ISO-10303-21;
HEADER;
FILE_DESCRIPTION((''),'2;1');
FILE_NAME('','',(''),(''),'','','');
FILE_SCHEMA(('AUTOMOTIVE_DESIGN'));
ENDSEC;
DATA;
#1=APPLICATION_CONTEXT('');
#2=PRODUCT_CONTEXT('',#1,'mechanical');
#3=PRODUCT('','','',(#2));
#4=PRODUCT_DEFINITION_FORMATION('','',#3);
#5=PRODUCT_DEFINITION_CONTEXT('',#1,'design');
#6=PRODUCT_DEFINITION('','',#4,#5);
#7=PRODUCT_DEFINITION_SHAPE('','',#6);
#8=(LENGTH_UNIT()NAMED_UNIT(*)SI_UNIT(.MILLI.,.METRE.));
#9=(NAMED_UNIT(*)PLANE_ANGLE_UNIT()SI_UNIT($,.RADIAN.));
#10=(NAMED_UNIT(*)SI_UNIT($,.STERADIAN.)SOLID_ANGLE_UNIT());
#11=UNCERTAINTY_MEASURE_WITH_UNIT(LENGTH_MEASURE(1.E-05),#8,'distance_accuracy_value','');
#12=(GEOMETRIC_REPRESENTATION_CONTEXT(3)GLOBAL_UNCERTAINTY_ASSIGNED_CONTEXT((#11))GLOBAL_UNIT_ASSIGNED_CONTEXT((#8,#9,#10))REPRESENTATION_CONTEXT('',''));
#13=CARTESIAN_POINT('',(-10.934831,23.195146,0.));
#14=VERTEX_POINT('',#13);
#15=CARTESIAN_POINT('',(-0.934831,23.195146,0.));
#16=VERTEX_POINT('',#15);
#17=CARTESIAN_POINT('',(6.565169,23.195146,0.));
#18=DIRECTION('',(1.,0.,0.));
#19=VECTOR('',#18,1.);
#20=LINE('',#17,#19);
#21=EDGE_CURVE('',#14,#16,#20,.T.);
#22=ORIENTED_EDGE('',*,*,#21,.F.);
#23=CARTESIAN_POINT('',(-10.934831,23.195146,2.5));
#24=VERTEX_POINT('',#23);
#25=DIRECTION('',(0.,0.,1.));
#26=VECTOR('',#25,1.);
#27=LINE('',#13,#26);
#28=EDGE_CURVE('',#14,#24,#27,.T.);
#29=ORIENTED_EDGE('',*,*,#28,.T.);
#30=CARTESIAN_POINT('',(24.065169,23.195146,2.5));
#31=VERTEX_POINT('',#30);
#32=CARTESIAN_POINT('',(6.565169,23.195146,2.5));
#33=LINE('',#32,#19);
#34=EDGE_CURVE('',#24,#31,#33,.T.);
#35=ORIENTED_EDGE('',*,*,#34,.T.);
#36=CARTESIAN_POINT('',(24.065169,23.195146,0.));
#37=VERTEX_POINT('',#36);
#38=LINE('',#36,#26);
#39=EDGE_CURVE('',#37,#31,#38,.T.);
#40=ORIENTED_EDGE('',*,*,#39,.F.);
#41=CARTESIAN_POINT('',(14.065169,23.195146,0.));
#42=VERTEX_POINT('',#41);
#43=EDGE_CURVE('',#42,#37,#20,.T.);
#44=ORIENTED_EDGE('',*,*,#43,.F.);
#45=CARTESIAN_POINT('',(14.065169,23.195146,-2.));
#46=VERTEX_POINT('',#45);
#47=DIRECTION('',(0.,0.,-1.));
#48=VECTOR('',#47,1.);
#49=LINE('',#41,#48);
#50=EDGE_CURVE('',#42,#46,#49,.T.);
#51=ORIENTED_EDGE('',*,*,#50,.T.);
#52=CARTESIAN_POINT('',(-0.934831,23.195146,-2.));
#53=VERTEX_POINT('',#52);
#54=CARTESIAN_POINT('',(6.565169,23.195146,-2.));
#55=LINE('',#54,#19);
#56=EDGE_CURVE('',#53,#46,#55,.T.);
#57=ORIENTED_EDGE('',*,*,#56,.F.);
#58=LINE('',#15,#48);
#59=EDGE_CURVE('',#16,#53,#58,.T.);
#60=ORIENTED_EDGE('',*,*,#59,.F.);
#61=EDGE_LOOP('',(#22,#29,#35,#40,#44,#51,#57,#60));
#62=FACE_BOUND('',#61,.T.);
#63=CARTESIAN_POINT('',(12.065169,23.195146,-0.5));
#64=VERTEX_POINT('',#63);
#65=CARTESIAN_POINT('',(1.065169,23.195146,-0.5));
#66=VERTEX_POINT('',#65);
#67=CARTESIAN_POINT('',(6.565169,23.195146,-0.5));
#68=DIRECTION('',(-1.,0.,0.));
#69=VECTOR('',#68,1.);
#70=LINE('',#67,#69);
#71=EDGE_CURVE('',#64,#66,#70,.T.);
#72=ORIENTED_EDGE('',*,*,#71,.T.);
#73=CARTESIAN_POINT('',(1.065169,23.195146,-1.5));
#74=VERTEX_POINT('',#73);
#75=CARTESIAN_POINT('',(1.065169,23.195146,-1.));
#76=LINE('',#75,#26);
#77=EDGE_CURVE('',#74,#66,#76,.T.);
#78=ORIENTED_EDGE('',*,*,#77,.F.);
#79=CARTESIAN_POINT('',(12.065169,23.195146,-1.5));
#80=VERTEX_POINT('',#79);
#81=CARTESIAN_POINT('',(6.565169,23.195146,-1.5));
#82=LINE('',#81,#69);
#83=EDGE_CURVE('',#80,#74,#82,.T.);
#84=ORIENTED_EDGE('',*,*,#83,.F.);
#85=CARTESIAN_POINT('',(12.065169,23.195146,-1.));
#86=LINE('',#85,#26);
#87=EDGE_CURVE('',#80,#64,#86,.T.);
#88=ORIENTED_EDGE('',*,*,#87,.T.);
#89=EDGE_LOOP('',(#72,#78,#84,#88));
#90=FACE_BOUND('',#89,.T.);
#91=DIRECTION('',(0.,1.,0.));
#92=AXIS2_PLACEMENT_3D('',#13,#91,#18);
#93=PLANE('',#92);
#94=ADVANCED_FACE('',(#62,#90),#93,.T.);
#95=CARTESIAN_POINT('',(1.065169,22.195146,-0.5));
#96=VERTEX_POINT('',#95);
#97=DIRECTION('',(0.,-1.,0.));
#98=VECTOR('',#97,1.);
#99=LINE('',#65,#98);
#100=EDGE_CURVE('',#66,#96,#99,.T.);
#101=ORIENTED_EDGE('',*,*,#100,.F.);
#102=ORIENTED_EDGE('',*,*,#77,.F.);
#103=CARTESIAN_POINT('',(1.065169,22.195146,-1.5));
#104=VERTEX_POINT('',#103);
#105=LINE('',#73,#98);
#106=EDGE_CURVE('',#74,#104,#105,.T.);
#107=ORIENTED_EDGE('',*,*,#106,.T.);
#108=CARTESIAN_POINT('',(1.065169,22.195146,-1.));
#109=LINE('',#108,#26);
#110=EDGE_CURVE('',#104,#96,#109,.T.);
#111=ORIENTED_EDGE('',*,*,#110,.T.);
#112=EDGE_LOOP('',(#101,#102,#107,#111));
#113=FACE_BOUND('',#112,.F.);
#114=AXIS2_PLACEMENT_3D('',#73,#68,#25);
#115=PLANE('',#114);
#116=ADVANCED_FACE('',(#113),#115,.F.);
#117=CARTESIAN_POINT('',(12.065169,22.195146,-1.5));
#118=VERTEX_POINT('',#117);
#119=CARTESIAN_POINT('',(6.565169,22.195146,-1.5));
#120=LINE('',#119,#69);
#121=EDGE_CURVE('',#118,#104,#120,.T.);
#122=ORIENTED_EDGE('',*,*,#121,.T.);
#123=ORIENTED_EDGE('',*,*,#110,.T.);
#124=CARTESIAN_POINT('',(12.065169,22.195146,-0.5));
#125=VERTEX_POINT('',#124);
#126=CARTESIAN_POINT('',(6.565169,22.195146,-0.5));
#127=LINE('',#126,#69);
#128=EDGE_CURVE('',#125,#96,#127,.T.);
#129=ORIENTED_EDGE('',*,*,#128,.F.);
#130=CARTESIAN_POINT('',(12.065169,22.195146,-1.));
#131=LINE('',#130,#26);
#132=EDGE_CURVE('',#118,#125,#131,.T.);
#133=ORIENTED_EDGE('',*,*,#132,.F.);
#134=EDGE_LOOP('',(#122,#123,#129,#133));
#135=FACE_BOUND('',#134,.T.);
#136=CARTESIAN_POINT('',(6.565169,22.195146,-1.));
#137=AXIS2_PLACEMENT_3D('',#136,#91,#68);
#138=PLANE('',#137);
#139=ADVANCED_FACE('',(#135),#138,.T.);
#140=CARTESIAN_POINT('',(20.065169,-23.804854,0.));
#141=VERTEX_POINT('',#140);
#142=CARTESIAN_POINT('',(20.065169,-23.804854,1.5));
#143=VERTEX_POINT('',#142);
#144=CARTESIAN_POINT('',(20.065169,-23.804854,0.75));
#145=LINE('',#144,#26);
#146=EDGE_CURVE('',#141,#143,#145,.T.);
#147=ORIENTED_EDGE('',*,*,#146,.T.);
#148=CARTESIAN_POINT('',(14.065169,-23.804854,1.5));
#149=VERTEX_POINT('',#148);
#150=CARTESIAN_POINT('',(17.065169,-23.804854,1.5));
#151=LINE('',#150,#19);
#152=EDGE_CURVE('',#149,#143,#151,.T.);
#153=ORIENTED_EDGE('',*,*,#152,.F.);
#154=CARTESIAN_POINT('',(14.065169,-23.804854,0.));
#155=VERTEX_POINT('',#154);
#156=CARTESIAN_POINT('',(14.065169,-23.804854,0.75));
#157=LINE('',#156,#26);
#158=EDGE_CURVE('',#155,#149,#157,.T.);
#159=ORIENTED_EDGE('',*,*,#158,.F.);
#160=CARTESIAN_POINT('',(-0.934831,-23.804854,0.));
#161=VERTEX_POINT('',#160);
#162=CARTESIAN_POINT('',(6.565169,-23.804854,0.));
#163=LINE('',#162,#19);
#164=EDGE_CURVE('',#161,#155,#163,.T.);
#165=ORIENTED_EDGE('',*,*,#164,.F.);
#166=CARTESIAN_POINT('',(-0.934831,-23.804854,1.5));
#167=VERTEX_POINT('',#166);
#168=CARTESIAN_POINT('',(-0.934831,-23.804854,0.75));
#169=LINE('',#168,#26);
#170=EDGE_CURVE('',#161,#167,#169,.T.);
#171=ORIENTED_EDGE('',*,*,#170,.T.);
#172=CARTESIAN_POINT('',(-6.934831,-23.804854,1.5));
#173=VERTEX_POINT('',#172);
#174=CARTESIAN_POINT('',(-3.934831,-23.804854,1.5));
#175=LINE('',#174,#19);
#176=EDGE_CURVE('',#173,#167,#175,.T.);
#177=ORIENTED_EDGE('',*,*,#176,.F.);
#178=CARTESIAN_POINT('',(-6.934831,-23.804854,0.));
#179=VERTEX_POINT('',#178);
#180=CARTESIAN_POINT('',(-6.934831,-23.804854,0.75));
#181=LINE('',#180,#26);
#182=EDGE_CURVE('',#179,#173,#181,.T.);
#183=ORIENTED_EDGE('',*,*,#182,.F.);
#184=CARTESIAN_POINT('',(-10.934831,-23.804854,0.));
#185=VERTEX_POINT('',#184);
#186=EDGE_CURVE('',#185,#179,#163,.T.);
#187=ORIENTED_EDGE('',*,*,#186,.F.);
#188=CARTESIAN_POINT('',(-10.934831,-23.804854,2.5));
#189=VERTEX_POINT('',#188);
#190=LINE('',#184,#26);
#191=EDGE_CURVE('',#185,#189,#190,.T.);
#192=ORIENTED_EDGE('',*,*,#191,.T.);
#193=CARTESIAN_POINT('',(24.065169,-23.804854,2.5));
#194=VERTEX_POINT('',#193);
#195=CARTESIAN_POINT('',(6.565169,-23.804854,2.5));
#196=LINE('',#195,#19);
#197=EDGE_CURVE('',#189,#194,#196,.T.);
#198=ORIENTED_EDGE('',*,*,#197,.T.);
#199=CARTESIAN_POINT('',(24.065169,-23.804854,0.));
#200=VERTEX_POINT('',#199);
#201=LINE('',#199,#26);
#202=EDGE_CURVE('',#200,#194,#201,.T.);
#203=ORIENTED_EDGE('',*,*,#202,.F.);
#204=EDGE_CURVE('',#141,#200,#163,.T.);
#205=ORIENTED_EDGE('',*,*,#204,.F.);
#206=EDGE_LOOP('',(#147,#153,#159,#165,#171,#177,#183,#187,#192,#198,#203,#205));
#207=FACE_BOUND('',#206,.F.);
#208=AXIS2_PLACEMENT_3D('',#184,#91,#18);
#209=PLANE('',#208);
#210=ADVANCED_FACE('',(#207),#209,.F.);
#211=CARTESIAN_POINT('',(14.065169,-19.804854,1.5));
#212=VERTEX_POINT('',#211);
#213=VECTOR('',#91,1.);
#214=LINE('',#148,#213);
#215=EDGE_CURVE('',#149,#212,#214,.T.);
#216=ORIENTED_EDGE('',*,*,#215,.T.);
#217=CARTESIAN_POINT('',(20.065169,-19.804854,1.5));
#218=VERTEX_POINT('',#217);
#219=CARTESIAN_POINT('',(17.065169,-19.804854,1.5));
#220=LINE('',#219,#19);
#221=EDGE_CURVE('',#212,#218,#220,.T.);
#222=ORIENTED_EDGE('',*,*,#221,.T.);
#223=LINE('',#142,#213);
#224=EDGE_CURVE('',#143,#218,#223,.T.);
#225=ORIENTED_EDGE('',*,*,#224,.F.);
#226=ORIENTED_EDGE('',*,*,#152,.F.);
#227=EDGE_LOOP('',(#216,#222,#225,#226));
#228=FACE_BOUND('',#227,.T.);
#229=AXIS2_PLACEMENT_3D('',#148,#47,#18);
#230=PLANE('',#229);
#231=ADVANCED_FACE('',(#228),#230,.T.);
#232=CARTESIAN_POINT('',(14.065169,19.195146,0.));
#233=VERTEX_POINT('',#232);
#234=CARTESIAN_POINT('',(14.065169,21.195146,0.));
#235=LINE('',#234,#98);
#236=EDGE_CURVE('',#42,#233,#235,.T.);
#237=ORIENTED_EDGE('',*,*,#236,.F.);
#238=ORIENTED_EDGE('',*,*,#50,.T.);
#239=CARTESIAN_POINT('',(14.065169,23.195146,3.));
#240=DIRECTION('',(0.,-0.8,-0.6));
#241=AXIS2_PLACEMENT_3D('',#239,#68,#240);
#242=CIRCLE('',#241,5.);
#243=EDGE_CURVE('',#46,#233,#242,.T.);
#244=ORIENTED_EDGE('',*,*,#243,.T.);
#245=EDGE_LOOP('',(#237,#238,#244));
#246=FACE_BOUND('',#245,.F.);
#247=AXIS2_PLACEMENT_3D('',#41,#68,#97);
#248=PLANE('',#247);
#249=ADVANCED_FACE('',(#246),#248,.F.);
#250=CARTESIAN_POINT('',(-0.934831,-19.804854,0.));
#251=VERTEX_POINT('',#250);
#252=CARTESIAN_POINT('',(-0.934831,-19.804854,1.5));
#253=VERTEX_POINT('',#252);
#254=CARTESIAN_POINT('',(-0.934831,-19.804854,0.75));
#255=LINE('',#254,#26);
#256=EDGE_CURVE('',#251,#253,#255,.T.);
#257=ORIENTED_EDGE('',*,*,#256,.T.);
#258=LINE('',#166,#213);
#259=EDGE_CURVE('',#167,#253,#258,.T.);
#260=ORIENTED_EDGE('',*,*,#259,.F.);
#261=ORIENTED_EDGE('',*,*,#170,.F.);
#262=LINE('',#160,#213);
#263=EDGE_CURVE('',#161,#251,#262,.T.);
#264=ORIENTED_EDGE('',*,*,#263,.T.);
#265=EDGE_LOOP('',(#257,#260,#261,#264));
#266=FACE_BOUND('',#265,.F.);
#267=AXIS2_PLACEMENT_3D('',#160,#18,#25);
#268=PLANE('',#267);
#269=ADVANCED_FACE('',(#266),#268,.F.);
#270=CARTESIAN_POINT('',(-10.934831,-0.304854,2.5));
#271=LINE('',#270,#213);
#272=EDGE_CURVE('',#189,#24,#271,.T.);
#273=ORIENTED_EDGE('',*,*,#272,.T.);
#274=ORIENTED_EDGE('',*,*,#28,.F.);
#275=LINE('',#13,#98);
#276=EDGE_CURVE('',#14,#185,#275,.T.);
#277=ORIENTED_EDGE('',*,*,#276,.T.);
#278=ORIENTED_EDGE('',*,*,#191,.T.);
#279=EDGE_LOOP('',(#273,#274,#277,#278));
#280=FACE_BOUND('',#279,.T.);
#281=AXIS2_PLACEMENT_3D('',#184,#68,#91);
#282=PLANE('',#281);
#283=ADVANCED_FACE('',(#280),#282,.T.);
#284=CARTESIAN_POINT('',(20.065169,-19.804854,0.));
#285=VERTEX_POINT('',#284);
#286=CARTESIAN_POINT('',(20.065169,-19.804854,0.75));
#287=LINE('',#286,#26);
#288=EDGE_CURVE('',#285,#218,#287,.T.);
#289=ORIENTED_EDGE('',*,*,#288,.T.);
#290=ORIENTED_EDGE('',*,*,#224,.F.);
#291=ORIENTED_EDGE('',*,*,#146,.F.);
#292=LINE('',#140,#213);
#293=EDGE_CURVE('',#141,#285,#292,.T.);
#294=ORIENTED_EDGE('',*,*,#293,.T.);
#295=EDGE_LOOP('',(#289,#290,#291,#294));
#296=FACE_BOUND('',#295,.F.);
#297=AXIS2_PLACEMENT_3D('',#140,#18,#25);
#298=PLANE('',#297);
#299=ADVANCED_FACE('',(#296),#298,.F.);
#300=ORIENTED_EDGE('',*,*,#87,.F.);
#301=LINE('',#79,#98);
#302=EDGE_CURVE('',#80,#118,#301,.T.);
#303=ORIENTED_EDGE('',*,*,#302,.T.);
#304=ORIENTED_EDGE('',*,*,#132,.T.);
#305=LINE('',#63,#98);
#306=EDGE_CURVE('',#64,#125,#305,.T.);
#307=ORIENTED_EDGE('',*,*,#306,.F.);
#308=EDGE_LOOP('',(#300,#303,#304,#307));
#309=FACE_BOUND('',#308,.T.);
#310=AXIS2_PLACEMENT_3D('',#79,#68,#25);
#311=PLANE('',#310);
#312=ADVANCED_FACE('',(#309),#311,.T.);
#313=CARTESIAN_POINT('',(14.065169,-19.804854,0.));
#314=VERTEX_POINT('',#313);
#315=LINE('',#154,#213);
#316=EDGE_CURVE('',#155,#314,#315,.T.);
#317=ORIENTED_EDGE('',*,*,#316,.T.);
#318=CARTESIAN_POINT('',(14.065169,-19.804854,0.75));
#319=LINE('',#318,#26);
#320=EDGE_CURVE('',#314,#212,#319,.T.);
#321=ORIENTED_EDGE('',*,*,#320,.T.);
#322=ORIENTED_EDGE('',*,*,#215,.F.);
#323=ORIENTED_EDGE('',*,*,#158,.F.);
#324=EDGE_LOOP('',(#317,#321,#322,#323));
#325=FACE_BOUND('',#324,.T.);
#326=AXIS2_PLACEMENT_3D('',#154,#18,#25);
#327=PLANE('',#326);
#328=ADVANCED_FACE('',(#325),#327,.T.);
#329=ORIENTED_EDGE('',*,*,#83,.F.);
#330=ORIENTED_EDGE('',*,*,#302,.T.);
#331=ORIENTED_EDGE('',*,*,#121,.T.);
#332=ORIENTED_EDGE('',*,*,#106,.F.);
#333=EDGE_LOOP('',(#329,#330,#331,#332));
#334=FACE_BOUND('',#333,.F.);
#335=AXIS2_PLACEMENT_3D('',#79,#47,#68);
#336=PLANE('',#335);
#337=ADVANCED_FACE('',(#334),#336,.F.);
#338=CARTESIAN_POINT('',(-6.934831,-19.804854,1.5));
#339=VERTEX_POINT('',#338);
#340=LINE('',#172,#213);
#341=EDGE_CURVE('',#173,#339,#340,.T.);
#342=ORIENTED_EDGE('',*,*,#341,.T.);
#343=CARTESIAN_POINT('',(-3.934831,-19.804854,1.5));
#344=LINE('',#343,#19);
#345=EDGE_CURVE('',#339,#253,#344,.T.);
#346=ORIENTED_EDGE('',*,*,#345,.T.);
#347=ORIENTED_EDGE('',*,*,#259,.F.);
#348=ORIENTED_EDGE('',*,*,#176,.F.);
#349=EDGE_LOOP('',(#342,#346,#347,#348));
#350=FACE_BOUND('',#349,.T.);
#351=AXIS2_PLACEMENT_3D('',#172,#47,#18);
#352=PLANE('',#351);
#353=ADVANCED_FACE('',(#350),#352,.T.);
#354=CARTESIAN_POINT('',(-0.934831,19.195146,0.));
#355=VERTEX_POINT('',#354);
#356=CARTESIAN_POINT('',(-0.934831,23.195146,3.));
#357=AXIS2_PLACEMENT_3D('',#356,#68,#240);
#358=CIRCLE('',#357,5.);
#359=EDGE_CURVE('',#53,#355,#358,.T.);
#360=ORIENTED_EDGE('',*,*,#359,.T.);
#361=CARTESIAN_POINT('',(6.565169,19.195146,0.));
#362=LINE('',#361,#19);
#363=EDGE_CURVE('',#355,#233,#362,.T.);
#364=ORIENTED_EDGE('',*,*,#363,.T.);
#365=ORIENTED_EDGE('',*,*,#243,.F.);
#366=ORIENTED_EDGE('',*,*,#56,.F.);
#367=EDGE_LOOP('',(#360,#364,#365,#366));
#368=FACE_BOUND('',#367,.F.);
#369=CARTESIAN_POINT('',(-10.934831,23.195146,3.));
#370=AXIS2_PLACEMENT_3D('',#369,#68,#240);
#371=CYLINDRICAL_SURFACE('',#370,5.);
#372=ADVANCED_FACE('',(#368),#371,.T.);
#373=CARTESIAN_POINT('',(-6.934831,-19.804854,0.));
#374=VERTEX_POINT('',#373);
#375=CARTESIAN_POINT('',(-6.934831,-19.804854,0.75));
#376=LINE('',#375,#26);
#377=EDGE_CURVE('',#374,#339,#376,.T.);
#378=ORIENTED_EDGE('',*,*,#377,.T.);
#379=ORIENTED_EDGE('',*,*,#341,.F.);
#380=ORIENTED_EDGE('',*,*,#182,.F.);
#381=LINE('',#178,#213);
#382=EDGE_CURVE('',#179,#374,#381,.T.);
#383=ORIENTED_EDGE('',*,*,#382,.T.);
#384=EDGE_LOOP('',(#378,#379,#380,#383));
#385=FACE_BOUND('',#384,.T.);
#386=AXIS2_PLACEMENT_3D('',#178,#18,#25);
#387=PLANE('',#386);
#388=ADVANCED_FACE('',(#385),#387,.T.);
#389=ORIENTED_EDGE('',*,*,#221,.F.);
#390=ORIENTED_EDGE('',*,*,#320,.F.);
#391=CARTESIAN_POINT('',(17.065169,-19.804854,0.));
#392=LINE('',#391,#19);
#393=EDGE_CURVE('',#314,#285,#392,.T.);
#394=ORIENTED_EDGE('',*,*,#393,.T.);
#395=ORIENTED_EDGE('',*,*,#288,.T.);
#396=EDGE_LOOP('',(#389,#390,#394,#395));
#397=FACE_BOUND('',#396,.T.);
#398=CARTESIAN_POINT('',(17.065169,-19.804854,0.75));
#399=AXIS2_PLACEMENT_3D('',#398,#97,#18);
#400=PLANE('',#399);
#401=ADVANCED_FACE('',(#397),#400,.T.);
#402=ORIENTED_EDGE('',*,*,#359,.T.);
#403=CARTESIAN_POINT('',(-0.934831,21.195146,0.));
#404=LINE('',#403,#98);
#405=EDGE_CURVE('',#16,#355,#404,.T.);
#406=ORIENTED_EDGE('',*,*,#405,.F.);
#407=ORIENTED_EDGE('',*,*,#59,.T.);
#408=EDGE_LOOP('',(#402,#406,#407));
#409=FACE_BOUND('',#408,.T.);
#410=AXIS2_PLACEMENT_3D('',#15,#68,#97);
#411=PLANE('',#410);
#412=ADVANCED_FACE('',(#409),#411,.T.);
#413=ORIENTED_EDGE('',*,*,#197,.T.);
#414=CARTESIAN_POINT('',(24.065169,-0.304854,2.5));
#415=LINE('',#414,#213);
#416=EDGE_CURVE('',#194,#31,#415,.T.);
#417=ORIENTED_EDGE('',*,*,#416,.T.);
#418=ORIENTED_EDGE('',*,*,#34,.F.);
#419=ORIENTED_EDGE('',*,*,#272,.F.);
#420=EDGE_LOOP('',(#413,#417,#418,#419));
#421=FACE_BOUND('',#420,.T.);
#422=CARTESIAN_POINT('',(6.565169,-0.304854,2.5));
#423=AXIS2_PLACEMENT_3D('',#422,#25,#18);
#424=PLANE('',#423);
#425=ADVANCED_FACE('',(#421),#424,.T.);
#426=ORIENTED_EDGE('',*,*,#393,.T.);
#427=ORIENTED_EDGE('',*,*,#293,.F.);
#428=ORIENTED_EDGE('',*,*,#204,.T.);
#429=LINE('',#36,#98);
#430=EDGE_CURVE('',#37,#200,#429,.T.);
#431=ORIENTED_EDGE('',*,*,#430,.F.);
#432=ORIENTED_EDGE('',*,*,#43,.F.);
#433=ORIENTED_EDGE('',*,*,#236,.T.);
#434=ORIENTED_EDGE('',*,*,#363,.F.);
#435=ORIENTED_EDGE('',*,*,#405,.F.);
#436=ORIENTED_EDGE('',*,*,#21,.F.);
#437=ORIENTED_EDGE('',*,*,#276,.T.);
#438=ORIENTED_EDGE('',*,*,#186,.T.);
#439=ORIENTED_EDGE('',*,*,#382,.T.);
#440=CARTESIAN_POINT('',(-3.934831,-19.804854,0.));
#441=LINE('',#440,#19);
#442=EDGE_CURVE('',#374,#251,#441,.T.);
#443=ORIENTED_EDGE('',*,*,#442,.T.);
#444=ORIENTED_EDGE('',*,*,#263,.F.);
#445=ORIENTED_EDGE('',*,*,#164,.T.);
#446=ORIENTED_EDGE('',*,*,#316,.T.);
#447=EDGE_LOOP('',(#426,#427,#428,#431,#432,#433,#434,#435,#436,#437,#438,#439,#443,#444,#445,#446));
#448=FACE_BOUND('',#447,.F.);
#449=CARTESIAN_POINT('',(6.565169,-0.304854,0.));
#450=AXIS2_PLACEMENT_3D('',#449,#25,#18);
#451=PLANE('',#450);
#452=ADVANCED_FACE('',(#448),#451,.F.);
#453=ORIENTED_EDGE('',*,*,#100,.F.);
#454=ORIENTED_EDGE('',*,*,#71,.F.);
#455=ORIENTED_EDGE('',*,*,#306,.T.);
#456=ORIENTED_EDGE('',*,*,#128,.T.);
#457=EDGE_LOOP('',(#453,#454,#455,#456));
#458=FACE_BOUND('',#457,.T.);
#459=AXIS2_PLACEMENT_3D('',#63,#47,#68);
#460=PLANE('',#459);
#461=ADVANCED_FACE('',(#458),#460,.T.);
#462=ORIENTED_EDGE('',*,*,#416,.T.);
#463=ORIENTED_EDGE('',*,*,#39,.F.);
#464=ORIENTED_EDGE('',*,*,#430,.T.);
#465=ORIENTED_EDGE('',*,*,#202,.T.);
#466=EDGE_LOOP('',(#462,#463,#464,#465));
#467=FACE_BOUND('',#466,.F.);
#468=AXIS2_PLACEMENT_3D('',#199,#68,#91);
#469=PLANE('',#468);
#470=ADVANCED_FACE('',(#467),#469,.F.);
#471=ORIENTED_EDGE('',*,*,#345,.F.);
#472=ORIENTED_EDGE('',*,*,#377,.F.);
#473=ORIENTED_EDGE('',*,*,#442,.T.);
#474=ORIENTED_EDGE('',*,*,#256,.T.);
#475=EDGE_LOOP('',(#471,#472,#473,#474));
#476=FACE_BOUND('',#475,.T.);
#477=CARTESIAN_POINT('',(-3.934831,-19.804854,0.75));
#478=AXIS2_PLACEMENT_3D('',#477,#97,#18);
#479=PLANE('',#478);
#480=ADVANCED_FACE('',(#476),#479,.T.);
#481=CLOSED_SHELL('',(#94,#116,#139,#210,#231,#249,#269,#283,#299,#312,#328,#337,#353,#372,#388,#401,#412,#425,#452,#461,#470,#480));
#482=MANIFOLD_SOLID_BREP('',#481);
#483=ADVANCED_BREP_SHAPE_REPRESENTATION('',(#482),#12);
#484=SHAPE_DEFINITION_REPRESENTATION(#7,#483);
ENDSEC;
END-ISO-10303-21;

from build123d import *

# Parameters (mm, degrees)
F0_W        = 35
F0_H        = 47
F1_DEPTH    = 2.5
F2_W        = 6
F2_H        = 1.5
F3_DEPTH    = 4
F4_W        = 15
F4_H        = 4
F5_DEPTH    = 2
F6_T1_DEPTH = 35
F7_W        = 11
F7_H        = 1
F8_DEPTH    = 1


# Not quite as in the source:
# - a fillet or chamfer that OpenCascade refuses, or shapes differently, is made with other operations: its cross-section is extruded or revolved along the edge and cut away or added


with BuildPart() as f1:
    # F0 (on Top) → F1 (new body)
    with BuildSketch(Plane.XY):
        with Locations((6.565169383, -0.3048535436)):
            Rectangle(F0_W, F0_H)
    extrude(amount=F1_DEPTH)

    # F2 (on face) → F3 (cut)
    with BuildSketch(Plane.XZ.offset(23.8048535436)):
        with Locations((-3.934830617, 0.75)):
            Rectangle(F2_W, F2_H)
        with Locations((17.065169383, 0.75)):
            Rectangle(F2_W, F2_H)
    extrude(amount=-F3_DEPTH, mode=Mode.SUBTRACT)

    # F4 (on face) → F5 (join)
    with BuildSketch(Plane(origin=(0, 0, 0), x_dir=(1, 0, 0), z_dir=(0, 0, -1))):
        with Locations((6.565169383, -21.1951464564)):
            Rectangle(F4_W, F4_H)
    extrude(amount=F5_DEPTH)

    # F6: fillet of radius 5 on 1 edges, made by hand

    # F6_s2 → F6_t1 (cut)
    with BuildSketch(Plane.YZ.offset(-10.934830617)):
        with BuildLine():
            ThreePointArc((19.1951464564, 0), (20.9590784789, -1.472135955), (23.1951464564, -2))
            Line((23.1951464564, -2), (19.1951464564, -2))
            Line((19.1951464564, -2), (19.1951464564, 0))
        make_face()
    extrude(amount=F6_T1_DEPTH, mode=Mode.SUBTRACT)

    # F7 (on face) → F8 (cut)
    with BuildSketch(Plane(origin=(0, 23.1951464564, 0), x_dir=(-1, 0, 0), z_dir=(0, 1, 0))):
        with Locations((-6.565169383, -1)):
            Rectangle(F7_W, F7_H)
    extrude(amount=-F8_DEPTH, mode=Mode.SUBTRACT)


solid = f1.part
